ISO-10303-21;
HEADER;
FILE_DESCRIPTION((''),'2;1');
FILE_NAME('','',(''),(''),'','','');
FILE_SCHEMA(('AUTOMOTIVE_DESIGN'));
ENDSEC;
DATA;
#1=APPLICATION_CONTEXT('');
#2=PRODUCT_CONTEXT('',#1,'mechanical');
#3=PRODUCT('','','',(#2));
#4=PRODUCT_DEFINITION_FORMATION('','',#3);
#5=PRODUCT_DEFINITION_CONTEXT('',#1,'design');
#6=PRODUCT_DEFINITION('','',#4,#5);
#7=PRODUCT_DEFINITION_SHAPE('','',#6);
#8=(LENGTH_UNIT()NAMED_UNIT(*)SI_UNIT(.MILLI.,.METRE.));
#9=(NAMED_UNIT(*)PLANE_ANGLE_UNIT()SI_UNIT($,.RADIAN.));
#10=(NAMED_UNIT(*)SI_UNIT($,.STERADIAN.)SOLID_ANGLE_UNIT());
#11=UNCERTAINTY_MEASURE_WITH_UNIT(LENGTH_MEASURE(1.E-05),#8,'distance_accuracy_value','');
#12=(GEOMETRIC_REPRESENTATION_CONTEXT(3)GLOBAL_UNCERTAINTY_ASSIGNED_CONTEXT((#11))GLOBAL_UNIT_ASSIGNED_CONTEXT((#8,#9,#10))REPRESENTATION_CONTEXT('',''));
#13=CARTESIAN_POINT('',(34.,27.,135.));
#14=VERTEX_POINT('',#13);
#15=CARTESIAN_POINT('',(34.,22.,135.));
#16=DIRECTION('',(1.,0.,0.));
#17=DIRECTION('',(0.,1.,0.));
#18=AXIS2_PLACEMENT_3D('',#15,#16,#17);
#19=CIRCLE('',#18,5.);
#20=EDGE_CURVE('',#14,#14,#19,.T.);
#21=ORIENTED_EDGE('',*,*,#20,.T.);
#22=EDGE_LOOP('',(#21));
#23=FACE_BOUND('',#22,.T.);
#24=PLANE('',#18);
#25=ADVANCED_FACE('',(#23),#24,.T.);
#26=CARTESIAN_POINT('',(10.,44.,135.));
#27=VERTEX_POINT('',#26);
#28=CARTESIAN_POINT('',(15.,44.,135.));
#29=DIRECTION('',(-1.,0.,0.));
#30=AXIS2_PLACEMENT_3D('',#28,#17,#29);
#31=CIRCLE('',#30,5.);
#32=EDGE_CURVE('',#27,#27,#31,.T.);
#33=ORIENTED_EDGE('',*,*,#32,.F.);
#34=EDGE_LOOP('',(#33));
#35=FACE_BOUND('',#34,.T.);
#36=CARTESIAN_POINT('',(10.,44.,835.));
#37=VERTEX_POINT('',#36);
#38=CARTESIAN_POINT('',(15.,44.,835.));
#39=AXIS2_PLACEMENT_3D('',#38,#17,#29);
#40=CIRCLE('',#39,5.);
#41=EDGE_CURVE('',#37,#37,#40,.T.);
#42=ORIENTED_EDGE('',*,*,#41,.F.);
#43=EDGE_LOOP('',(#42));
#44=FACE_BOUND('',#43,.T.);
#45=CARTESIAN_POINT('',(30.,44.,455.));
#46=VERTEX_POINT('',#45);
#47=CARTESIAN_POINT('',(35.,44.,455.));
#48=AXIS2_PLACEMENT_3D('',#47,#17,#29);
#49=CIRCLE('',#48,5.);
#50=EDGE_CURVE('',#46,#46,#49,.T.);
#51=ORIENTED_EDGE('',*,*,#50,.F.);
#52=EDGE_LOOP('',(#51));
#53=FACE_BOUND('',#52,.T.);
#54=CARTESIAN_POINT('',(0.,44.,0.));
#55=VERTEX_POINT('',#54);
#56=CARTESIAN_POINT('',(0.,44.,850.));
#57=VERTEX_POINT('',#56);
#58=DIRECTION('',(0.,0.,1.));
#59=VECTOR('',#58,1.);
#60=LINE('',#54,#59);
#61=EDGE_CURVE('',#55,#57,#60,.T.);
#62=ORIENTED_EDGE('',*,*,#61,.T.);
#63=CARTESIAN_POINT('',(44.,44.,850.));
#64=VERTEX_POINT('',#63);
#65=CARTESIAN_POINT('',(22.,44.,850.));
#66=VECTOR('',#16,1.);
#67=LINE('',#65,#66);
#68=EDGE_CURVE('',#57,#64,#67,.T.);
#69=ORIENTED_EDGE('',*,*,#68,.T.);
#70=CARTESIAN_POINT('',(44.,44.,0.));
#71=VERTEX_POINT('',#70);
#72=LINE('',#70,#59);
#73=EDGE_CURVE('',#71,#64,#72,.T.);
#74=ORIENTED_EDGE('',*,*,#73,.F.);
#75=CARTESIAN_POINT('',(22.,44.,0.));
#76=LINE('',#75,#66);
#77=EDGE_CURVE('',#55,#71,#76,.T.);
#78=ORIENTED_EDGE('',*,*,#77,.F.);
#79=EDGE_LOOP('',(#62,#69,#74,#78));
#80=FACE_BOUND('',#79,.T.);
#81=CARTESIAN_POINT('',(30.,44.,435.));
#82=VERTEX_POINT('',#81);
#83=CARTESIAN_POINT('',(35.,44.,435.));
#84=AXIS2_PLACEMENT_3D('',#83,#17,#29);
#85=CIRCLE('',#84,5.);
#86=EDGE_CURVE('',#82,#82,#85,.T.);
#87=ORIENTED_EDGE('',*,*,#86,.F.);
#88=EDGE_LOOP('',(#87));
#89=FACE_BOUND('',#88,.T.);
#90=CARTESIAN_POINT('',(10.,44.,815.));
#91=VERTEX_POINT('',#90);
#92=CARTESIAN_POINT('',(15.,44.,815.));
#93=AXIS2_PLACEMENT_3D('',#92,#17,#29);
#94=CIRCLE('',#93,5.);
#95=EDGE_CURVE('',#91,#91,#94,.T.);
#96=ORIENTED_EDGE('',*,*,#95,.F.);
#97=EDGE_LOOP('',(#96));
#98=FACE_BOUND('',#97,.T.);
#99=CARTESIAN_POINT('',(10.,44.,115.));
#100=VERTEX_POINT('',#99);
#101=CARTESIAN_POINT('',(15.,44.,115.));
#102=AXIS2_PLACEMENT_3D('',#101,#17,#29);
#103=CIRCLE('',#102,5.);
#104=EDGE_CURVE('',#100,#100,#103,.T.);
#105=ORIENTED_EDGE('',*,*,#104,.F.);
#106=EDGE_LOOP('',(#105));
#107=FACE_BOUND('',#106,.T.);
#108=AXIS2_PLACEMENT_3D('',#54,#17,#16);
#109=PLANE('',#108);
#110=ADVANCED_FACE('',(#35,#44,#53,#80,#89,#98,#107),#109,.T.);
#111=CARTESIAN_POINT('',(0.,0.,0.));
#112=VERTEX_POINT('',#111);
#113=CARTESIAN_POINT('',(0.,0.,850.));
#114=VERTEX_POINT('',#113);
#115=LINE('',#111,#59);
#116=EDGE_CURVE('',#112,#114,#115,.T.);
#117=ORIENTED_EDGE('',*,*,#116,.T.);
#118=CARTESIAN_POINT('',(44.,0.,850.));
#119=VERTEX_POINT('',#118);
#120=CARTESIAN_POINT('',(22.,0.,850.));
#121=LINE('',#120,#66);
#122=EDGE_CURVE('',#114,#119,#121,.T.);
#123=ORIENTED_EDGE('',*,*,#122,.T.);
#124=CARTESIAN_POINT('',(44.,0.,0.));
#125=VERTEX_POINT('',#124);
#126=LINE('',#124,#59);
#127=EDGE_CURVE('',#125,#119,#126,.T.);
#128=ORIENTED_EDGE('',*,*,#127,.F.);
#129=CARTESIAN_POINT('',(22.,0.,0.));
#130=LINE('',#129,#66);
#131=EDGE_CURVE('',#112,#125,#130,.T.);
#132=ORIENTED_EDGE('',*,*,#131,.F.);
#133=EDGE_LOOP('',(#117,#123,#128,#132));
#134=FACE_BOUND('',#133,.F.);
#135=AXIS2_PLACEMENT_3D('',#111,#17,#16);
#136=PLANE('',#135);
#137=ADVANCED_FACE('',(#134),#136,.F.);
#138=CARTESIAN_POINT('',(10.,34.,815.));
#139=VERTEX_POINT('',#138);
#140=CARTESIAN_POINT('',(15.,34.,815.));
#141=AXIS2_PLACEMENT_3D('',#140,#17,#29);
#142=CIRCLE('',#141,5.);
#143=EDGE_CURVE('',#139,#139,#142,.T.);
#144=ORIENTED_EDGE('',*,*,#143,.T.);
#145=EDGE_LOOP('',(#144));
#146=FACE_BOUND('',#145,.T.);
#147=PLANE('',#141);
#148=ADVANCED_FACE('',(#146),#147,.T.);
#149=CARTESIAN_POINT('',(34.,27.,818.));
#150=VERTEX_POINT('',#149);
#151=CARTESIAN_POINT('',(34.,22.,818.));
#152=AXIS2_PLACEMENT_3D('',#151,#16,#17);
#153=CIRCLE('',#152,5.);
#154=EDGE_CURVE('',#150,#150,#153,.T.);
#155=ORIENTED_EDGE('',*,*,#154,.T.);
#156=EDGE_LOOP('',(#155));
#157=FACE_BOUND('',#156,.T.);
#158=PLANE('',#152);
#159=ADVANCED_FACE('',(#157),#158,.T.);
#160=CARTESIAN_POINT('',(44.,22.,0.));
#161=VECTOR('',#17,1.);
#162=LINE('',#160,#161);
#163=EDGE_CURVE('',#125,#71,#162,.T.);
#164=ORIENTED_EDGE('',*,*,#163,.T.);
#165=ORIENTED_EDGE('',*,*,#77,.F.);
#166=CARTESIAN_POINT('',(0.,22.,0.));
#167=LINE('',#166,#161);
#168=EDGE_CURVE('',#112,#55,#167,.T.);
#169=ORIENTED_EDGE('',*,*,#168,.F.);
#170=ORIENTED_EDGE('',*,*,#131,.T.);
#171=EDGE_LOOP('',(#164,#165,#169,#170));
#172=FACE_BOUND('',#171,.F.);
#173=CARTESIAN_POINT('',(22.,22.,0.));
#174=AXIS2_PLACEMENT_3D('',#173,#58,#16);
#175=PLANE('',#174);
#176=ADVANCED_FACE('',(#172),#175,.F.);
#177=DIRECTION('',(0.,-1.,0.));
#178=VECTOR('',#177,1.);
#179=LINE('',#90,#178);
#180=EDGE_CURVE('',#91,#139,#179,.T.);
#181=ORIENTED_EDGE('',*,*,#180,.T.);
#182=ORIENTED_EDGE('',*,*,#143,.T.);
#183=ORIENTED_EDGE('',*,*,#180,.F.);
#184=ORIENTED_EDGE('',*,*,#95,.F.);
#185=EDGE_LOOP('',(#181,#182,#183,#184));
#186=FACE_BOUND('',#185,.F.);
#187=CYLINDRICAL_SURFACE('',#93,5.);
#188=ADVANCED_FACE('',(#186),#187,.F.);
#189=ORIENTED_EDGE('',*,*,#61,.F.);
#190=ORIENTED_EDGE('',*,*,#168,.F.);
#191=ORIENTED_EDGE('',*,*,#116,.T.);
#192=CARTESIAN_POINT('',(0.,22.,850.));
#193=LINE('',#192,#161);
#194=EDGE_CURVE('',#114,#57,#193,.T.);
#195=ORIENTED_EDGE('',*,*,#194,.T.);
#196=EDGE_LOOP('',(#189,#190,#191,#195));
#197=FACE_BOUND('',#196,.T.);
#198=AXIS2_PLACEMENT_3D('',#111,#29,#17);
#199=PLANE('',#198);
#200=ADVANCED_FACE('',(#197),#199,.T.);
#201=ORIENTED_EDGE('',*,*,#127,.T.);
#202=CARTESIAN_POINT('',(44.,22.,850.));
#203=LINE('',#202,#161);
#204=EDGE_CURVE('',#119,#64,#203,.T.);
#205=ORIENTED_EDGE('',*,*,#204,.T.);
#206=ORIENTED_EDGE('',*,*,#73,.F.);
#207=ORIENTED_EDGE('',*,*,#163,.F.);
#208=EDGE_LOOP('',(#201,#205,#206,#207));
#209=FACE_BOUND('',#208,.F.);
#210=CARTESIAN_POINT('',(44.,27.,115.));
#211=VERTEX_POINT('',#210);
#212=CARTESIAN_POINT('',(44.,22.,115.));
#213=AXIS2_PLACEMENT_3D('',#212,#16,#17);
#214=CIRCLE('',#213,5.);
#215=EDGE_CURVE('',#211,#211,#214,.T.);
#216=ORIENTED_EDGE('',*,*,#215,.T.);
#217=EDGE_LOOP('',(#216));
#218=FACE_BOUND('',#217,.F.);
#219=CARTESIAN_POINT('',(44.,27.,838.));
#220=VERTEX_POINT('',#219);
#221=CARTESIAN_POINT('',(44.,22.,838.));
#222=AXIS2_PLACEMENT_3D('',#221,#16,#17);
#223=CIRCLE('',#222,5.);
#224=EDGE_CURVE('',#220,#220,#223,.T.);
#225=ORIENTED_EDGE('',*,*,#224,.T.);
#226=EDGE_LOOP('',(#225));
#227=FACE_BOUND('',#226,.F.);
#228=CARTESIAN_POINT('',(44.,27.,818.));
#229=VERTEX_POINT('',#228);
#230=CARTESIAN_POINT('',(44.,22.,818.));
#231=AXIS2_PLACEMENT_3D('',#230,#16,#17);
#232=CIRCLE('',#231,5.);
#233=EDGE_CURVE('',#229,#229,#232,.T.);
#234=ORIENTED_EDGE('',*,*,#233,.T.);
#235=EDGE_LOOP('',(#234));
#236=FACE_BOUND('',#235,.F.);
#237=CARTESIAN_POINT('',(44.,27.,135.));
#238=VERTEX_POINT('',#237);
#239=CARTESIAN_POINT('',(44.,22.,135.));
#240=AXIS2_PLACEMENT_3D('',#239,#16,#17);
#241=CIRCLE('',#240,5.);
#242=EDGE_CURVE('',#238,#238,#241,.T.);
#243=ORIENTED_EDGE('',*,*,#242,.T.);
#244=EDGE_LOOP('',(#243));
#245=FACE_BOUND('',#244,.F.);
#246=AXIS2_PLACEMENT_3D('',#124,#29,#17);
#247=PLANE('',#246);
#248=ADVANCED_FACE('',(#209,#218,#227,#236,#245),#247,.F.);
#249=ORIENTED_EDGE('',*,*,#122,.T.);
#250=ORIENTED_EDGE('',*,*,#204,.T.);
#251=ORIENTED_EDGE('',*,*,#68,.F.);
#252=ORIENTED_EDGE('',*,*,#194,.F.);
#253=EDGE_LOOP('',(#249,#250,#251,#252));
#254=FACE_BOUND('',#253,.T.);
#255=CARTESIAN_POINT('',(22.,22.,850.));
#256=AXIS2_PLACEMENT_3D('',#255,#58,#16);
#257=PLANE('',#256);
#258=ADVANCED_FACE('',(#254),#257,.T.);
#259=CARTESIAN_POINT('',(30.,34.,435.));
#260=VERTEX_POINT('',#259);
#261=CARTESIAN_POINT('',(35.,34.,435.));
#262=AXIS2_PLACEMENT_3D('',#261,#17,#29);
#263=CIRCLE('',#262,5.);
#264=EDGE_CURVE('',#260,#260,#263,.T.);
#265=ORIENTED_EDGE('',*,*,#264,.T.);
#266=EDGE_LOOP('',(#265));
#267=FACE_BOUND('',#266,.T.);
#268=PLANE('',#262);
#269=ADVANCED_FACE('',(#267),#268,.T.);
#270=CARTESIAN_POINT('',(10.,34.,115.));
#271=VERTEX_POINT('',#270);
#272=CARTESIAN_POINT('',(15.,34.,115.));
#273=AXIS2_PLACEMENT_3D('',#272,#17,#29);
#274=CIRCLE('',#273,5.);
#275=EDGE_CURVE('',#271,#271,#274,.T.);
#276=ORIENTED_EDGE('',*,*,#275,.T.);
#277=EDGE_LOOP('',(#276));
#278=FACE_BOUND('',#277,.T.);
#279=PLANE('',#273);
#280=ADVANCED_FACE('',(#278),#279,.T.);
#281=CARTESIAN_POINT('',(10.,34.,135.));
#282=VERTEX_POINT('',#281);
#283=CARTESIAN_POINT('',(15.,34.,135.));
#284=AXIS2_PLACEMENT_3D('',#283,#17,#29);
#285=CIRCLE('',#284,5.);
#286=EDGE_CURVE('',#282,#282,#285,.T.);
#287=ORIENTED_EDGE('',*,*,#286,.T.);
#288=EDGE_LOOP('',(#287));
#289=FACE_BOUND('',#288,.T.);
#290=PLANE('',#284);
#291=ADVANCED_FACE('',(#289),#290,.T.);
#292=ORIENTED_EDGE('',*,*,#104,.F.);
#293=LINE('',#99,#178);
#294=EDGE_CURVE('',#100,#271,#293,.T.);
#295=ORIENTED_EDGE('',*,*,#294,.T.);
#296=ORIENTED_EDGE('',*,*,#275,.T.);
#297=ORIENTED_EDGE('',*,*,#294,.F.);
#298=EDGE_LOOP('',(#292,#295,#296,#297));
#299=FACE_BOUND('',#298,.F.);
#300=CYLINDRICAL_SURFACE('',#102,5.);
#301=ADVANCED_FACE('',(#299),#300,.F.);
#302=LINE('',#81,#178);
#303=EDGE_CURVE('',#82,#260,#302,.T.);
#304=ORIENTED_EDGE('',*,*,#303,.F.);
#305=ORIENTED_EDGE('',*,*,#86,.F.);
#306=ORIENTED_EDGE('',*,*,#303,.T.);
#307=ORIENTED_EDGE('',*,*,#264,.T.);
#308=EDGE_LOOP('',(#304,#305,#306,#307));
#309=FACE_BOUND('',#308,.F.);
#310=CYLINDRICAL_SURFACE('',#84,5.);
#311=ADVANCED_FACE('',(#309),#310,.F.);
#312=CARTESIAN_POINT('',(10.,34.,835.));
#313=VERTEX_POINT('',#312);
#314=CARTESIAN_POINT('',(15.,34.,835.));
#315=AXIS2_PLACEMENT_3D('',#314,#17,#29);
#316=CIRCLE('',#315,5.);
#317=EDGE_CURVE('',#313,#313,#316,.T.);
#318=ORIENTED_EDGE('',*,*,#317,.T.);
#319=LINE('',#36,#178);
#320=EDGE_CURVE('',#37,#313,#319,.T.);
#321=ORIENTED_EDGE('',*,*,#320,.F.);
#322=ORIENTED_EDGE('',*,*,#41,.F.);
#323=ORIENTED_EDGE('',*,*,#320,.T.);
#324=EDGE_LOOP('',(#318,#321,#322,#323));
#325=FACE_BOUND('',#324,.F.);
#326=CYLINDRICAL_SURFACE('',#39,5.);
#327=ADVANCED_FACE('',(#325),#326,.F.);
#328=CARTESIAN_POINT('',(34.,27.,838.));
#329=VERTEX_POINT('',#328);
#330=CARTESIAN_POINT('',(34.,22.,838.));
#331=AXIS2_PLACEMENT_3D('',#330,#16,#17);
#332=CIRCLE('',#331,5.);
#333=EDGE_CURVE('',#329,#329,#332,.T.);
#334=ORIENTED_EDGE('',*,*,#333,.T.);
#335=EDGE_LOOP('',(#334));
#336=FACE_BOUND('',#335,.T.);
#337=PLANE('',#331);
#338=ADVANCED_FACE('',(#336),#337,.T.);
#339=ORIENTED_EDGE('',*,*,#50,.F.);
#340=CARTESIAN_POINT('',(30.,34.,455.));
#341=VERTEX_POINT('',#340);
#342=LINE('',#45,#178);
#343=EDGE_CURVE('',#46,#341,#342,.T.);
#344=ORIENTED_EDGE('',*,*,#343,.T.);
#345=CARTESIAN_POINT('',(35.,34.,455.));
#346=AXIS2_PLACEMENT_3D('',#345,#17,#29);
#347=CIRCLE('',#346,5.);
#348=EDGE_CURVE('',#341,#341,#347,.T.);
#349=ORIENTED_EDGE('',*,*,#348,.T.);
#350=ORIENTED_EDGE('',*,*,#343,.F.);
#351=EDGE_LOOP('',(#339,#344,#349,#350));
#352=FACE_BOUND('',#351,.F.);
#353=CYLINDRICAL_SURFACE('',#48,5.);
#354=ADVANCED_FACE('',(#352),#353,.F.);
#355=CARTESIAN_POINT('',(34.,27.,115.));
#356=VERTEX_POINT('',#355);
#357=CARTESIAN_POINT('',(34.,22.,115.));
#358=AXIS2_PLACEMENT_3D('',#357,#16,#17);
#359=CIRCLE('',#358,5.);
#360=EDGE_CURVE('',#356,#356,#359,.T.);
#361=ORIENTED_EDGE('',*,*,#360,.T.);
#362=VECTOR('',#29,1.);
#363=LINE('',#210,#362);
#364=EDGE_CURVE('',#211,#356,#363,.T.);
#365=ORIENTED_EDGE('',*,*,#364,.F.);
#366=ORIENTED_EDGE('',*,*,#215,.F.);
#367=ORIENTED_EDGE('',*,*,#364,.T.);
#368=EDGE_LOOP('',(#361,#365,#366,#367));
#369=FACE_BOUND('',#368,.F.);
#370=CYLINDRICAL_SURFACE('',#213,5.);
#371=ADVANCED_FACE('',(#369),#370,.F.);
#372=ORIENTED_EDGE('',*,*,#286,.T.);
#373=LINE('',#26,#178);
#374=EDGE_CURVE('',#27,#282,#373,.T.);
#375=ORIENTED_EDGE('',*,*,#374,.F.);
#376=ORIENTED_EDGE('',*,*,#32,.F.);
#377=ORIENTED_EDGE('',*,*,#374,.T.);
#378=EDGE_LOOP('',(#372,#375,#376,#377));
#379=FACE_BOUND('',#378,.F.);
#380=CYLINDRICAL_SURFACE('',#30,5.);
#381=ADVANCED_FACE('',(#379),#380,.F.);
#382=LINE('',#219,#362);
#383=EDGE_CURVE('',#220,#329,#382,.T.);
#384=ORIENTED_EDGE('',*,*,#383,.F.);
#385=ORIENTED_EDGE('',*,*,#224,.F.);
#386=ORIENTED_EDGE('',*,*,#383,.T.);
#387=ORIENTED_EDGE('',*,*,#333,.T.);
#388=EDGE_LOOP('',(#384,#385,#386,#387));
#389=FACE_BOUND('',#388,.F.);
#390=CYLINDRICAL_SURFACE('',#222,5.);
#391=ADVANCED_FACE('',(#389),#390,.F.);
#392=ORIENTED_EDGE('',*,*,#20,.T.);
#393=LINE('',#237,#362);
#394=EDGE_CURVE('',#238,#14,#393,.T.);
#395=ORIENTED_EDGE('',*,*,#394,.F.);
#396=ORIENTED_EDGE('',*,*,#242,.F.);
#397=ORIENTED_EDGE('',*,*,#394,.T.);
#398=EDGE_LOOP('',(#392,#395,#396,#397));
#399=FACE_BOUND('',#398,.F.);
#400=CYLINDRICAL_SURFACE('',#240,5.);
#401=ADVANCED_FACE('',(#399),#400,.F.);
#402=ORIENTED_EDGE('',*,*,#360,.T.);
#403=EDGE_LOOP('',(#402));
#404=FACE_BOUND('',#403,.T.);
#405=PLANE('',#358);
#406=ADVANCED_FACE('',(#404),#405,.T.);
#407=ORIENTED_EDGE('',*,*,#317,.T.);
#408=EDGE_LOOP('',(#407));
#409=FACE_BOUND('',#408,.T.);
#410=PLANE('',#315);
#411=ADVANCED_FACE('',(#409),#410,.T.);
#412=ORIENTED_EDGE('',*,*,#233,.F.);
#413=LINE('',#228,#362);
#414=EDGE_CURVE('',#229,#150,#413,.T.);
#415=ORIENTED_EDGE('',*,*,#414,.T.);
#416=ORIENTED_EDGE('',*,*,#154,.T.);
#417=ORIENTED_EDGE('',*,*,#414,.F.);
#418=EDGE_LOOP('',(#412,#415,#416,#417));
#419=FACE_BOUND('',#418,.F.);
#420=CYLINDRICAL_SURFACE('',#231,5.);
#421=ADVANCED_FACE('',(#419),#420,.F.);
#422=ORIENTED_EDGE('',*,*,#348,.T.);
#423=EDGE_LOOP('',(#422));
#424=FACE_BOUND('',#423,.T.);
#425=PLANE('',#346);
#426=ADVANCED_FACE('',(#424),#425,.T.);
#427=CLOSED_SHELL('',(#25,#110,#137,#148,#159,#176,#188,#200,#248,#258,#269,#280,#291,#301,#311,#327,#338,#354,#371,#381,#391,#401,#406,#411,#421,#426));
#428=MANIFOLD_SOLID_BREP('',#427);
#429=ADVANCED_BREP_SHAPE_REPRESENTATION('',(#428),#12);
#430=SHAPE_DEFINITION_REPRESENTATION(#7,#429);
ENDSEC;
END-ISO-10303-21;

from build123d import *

# Parameters (mm, degrees)
F0_W     = 44
F0_H     = 44
F1_DEPTH = 850
F2_R     = 5
F3_DEPTH = 10
F4_R     = 5
F5_DEPTH = 10


# Not quite as in the source:
# - a feature names something its author has since deleted; it is built from what else it names


with BuildPart() as f1:
    # F0 (on Top) → F1 (new body)
    with BuildSketch(Plane.XY):
        with Locations((22, 22)):
            Rectangle(F0_W, F0_H)
    extrude(amount=F1_DEPTH)

    # F2 (on face) → F3 (cut)
    with BuildSketch(Plane(origin=(0, 44, 0), x_dir=(-1, 0, 0), z_dir=(0, 1, 0))):
        with Locations((-15, 115)):
            Circle(F2_R)
        with Locations((-15, 135)):
            Circle(F2_R)
        with Locations((-35, 435)):
            Circle(F2_R)
        with Locations((-15, 835)):
            Circle(F2_R)
        with Locations((-15, 815)):
            Circle(F2_R)
        with Locations((-35, 455)):
            Circle(F2_R)
    extrude(amount=-F3_DEPTH, mode=Mode.SUBTRACT)

    # F4 (on face) → F5 (cut)
    with BuildSketch(Plane.YZ.offset(44)):
        with Locations((22, 135)):
            Circle(F4_R)
        with Locations((22, 115)):
            Circle(F4_R)
        with Locations((22, 838)):
            Circle(F4_R)
        with Locations((22, 818)):
            Circle(F4_R)
    extrude(amount=-F5_DEPTH, mode=Mode.SUBTRACT)


solid = f1.part
